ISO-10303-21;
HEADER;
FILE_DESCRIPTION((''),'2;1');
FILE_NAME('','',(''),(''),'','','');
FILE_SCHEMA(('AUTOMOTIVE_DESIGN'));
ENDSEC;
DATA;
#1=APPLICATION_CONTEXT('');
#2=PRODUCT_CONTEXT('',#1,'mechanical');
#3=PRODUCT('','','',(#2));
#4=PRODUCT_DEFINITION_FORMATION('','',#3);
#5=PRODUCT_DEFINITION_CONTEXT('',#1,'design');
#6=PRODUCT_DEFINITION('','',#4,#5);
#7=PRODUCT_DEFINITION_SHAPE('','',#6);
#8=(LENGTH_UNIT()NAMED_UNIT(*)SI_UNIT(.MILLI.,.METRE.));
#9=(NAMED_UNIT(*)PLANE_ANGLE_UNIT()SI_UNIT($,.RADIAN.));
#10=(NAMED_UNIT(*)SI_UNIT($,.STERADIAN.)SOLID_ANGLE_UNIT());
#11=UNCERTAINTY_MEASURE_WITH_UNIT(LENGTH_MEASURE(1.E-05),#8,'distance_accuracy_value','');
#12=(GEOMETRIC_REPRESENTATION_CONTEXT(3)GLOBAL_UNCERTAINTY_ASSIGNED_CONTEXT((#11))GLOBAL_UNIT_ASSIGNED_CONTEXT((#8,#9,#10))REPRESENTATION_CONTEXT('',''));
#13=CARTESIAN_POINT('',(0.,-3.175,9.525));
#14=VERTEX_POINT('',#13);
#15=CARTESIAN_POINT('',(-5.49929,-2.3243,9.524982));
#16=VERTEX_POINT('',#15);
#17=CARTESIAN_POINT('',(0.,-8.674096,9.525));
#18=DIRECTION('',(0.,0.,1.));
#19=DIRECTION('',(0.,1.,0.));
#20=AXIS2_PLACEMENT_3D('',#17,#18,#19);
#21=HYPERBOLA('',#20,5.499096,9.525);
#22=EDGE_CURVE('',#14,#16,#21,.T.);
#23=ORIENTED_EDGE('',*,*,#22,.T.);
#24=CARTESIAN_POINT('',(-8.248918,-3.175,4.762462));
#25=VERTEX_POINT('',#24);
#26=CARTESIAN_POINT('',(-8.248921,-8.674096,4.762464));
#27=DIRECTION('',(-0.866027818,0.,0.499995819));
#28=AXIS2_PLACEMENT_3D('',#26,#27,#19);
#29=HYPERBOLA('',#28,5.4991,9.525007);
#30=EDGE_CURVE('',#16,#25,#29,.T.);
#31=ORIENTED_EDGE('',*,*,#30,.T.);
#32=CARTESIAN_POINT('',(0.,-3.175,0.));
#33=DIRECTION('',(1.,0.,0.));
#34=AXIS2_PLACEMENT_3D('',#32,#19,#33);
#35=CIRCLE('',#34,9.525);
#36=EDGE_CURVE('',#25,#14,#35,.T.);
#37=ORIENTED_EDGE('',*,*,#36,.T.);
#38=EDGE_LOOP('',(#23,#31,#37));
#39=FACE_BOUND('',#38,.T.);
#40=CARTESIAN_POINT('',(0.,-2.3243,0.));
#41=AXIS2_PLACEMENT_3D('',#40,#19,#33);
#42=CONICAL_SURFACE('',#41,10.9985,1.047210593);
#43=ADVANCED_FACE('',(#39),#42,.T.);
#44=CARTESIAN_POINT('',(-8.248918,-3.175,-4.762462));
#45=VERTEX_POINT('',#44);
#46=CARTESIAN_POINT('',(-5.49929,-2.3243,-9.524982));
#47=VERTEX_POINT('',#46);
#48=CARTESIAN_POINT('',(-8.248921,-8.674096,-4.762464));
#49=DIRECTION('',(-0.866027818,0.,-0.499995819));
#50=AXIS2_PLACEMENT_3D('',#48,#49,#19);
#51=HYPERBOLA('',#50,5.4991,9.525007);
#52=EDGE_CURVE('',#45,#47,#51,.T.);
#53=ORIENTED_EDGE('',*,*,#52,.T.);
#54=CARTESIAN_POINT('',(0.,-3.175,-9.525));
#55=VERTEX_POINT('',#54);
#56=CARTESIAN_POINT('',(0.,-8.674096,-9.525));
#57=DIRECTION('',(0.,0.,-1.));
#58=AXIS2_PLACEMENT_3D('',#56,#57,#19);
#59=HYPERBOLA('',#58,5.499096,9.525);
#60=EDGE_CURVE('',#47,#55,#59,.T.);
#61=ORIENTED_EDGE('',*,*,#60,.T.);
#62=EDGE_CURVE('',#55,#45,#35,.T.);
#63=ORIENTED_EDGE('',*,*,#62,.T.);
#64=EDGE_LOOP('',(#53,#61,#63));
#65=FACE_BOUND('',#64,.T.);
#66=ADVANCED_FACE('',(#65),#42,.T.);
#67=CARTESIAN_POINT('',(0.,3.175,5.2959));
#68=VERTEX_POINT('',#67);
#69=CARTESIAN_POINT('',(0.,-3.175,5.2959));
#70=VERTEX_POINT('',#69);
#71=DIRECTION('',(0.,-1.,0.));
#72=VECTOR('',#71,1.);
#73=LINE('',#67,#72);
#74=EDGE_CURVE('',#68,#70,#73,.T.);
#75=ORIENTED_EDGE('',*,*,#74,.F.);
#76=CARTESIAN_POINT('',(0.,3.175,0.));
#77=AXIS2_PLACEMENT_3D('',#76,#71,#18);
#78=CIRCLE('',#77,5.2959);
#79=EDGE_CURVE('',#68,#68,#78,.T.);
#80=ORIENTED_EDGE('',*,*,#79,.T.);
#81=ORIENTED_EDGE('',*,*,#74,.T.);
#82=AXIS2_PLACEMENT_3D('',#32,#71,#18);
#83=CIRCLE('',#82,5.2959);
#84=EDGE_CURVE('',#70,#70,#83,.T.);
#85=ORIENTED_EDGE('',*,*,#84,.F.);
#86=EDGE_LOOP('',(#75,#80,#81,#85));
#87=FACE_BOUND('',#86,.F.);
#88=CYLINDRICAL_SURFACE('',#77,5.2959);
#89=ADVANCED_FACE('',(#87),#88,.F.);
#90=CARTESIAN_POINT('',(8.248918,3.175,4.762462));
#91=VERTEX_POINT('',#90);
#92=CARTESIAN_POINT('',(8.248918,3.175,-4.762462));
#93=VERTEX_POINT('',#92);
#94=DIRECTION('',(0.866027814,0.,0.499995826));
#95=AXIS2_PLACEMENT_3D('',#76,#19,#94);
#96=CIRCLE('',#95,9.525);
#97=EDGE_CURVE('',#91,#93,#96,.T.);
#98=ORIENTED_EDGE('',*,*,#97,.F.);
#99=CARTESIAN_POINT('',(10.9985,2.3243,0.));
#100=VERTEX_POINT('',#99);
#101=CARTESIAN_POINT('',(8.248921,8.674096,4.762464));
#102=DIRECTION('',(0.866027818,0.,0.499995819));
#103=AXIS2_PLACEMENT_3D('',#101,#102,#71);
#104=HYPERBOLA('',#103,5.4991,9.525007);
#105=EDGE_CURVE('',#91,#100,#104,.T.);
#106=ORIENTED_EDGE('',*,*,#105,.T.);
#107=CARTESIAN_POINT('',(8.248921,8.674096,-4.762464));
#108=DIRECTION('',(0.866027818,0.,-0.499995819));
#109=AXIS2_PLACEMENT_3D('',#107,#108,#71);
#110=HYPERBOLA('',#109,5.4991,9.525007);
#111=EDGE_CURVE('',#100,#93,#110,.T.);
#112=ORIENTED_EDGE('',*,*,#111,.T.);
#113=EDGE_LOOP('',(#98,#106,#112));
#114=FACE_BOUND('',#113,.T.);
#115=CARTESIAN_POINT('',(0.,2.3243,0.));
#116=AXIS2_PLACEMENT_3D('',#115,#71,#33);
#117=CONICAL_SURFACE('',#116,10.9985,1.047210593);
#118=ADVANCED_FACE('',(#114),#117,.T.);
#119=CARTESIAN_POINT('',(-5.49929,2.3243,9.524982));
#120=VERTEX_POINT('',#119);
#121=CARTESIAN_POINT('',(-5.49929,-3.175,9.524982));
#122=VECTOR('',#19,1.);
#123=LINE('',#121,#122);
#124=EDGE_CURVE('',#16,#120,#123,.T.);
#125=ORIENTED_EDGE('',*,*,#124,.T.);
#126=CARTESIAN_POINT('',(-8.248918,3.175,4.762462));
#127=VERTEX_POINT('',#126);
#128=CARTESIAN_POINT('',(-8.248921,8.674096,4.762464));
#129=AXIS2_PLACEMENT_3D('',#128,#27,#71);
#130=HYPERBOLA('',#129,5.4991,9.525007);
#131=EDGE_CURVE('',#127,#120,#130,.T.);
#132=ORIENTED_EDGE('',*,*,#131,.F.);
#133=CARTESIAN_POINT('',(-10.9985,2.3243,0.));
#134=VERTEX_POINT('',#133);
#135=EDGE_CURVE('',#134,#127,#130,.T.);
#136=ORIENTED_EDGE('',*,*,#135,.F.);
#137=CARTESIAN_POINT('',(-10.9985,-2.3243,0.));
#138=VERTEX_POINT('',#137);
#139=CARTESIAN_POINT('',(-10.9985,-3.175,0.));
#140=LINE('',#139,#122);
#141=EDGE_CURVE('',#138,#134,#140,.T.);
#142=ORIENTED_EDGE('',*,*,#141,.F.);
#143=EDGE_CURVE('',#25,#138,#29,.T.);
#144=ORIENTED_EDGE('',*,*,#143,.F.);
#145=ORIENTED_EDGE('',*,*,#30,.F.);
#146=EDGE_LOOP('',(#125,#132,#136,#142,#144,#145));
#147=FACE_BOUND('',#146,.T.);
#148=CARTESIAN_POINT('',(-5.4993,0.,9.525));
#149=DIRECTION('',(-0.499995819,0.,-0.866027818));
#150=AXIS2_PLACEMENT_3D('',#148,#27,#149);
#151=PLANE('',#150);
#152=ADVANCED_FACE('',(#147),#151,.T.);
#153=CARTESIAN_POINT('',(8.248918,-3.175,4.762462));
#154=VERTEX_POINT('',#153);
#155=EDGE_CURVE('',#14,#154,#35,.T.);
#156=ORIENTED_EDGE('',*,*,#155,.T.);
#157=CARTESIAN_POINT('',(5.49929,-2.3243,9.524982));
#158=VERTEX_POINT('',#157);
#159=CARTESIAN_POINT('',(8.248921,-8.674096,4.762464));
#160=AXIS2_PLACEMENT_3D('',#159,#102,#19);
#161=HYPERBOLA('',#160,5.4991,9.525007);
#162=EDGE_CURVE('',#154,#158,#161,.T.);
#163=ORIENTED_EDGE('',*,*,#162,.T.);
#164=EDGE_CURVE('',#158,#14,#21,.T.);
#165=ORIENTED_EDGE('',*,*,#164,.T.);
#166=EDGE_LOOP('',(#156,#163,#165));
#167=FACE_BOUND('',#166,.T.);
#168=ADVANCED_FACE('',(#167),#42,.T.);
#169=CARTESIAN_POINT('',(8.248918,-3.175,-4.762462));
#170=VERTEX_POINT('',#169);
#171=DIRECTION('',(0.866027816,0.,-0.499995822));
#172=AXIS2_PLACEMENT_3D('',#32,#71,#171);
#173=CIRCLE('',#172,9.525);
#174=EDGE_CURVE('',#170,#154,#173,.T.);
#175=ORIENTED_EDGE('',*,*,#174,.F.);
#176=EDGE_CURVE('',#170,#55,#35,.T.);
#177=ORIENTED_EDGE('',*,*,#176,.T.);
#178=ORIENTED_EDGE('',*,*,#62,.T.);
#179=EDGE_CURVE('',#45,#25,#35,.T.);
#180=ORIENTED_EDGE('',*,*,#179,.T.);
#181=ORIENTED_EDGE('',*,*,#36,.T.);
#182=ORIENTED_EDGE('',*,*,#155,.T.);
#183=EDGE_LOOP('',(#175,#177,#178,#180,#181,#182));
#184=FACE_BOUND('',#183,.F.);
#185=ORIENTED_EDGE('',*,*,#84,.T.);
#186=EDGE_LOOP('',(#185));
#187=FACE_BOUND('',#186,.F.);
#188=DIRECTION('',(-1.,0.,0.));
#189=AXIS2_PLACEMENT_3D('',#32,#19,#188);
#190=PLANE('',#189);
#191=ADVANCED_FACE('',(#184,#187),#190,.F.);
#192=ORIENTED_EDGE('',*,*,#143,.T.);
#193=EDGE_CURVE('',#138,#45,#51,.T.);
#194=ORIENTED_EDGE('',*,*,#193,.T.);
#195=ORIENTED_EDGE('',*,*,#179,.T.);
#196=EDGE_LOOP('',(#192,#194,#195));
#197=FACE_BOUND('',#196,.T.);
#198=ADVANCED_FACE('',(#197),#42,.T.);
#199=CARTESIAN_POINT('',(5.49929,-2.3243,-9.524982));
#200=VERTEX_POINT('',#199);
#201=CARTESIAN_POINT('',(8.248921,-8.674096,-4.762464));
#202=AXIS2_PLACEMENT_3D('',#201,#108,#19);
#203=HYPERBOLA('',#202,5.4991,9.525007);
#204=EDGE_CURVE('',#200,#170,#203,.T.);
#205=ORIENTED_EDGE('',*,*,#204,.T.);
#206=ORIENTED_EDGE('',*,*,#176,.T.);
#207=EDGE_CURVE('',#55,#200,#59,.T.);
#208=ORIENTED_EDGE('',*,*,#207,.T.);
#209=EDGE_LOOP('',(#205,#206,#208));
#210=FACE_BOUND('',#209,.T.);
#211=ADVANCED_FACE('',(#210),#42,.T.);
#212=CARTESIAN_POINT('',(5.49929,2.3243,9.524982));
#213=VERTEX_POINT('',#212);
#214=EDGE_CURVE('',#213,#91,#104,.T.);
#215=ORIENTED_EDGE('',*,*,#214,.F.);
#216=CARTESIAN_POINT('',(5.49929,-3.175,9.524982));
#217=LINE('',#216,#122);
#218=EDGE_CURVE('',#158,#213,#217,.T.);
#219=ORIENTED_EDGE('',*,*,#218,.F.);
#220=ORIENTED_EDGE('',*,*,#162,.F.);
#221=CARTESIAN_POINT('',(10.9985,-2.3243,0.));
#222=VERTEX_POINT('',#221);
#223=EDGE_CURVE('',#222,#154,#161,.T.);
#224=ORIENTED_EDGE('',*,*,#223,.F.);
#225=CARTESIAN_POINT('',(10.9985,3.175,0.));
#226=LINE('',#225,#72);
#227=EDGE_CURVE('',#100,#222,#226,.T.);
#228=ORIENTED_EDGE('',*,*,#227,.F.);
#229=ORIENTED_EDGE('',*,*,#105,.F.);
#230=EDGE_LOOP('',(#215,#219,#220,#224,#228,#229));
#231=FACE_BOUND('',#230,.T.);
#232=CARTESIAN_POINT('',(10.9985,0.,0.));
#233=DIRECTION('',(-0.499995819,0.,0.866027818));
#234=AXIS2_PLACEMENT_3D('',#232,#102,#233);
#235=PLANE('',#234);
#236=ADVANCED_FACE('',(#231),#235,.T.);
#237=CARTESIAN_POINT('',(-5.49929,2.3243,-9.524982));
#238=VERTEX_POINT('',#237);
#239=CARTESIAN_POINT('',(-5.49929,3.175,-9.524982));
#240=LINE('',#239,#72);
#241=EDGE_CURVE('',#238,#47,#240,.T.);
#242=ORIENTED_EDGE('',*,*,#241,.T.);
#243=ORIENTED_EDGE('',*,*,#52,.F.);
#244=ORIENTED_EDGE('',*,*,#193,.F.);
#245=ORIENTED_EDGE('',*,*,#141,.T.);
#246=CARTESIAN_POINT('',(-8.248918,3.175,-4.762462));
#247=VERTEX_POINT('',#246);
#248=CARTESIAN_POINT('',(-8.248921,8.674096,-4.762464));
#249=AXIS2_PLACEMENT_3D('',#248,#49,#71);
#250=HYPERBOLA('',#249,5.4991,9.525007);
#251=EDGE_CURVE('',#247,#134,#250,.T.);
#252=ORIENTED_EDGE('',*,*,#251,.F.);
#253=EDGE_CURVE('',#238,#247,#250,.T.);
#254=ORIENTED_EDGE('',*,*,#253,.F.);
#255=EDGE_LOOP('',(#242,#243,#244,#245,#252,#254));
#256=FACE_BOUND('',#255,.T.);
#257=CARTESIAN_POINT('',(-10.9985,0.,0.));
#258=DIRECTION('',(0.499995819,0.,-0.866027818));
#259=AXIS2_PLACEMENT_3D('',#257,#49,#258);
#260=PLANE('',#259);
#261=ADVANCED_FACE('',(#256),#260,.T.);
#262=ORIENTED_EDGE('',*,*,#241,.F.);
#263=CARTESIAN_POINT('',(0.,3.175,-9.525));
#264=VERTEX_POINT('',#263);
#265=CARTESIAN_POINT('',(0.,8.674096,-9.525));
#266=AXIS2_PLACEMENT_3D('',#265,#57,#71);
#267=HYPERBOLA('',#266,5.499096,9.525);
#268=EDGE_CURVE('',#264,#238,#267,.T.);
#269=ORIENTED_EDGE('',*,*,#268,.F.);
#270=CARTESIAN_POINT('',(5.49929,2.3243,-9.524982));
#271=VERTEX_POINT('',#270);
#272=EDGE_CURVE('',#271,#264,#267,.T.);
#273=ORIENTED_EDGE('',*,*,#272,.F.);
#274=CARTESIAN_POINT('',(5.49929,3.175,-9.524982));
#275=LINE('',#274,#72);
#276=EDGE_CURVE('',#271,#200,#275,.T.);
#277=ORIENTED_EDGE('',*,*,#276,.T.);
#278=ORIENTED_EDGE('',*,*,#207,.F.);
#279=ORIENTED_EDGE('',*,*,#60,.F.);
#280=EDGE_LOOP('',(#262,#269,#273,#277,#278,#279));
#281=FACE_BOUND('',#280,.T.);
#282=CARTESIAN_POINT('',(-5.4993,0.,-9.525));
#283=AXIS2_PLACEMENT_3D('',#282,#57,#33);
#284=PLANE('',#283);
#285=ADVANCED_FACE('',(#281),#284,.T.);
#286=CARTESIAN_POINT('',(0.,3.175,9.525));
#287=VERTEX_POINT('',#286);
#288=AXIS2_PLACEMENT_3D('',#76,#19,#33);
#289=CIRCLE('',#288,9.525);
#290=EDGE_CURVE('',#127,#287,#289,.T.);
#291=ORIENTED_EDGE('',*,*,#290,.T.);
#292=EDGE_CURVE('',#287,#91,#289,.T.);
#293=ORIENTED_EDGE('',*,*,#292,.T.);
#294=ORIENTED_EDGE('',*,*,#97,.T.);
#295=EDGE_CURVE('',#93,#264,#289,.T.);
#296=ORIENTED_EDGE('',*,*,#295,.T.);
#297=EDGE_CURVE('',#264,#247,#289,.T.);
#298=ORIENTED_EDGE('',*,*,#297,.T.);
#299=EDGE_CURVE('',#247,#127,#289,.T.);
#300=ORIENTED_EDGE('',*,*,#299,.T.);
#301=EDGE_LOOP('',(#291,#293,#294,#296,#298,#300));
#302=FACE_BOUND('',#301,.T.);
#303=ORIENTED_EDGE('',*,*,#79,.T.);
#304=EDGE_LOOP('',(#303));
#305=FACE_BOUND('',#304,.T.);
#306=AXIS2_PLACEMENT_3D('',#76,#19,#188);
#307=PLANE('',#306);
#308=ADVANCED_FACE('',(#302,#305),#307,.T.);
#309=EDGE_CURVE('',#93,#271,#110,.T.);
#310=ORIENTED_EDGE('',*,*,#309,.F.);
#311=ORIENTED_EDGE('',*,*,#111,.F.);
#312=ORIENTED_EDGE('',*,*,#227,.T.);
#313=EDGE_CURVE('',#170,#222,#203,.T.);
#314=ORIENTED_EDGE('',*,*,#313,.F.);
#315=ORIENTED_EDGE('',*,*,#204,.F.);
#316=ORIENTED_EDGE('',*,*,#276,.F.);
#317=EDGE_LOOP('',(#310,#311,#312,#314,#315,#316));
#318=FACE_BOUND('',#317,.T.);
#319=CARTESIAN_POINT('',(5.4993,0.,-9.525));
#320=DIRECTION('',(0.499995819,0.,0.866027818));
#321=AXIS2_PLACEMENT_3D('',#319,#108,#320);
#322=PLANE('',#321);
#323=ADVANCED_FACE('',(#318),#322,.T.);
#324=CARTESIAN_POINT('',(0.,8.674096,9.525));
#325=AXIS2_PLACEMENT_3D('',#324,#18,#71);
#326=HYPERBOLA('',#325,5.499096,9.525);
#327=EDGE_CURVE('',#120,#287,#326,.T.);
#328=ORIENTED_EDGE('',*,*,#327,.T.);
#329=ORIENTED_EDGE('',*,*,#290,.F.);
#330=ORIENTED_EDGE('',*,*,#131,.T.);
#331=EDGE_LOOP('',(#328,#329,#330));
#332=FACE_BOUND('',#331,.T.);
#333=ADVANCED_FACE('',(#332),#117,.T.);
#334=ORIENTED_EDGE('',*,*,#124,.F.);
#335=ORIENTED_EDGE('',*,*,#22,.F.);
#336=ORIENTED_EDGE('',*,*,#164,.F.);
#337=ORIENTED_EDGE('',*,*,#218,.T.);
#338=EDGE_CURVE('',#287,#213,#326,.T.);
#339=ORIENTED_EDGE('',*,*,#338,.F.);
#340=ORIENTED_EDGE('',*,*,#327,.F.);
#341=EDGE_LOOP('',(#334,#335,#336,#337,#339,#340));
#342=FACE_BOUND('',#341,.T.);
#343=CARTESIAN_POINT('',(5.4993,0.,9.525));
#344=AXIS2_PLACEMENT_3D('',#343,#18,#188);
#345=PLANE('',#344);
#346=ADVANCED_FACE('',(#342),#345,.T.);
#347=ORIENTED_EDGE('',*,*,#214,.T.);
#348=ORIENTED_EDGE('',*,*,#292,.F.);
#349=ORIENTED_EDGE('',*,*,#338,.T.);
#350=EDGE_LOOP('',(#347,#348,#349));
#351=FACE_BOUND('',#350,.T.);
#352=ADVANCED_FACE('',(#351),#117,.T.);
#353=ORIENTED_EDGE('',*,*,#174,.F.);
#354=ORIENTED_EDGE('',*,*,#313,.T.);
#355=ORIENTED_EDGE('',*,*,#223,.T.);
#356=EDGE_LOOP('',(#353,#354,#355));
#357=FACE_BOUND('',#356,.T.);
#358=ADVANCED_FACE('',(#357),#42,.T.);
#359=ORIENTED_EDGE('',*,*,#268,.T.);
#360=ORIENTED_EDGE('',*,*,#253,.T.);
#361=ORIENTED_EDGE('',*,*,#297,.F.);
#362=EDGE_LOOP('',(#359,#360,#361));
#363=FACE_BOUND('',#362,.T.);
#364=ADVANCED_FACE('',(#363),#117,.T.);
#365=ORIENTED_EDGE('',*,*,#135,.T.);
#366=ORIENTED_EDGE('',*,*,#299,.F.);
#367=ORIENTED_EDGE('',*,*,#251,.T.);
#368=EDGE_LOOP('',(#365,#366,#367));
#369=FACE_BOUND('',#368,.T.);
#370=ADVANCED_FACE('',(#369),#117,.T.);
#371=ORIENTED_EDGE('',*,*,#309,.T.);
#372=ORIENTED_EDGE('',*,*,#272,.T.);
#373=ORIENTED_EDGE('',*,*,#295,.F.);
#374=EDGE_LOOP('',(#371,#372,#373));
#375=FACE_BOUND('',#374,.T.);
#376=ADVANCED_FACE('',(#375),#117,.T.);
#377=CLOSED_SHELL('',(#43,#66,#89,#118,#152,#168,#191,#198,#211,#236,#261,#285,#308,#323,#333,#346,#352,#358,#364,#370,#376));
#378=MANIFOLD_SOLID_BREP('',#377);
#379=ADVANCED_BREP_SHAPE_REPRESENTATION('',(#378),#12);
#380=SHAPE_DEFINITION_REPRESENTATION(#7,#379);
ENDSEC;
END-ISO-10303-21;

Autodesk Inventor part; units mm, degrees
ref_plane "YZ Plane" through (0, 0, 0) normal (1, 0, 0) x (0, 1, 0)
ref_plane "XZ Plane" through (0, 0, 0) normal (0, 1, 0) x (-1, 0, 0)
ref_plane "XY Plane" through (0, 0, 0) normal (0, 0, 1) x (1, 0, 0)
sketch "Sketch3" plane through (0, 0, 0) normal (0, 1, 0) x (-1, 0, 0)
  line L0 (10.9985, 0) -> (5.4993, -9.525)
  line L1 (5.4993, -9.525) -> (-5.4993, -9.525)
  line L2 (-5.4993, -9.525) -> (-10.9985, 0)
  line L3 (-10.9985, 0) -> (-5.4993, 9.525)
  line L4 (-5.4993, 9.525) -> (5.4993, 9.525)
  line L5 (5.4993, 9.525) -> (10.9985, 0)
  point P0 (0, 0)
  point P1 (0, 0)
  point P2 (0, 0)
  dimension "d27" = 19.05
extrude "Extrusion2" add sketch "Sketch3" along normal mid plane 6.35
sketch "Sketch5" plane through (0, 0, 0) normal (0, 0, 1) x (1, 0, 0)
  line L0 (0, -8.89) -> (0, 8.89) projected
  line L1 (10.9985, 3.175) -> (5.4993, 3.175) construction
  line L2 (5.4993, 3.175) -> (5.4993, -3.175) projected
  line L3 (10.9985, 3.175) -> (5.4993, 3.175) projected
  line L4 (10.9985, 3.175) -> (10.9985, -3.175) construction
  line L5 (5.4993, -3.175) -> (10.9985, -3.175) projected
  line L6 (9.525, 3.175) -> (10.9985, 3.175)
  line L7 (10.9985, 3.175) -> (10.9985, 2.3243)
  line L8 (10.9985, 2.3243) -> (9.525, 3.175)
  line L9 (0, 0) -> (14.3088, 0) construction
  line L10 (9.525, -3.175) -> (10.9985, -3.175)
  line L11 (10.9985, -3.175) -> (10.9985, -2.3243)
  line L12 (10.9985, -2.3243) -> (9.525, -3.175)
  dimension "d15" = 19.05
  dimension "d16" = 30
revolve "Revolution3" cut sketch "Sketch5" angle 360 about axis through (0, -10, 0) along (0, 1, 0)
hole "Hole1" at (0, 3.175, 0) direction (0, -1, 0) diameter 10.5918 end through all thread size "1/2-13 UNC" class "2B" standard "ANSI Unified Screw Threads"
equation "\"diameter\" = 25.4"
equation "\"length\" = 76.2"
properties part number "Door Plate Nut" material "Steel, Carbon"
